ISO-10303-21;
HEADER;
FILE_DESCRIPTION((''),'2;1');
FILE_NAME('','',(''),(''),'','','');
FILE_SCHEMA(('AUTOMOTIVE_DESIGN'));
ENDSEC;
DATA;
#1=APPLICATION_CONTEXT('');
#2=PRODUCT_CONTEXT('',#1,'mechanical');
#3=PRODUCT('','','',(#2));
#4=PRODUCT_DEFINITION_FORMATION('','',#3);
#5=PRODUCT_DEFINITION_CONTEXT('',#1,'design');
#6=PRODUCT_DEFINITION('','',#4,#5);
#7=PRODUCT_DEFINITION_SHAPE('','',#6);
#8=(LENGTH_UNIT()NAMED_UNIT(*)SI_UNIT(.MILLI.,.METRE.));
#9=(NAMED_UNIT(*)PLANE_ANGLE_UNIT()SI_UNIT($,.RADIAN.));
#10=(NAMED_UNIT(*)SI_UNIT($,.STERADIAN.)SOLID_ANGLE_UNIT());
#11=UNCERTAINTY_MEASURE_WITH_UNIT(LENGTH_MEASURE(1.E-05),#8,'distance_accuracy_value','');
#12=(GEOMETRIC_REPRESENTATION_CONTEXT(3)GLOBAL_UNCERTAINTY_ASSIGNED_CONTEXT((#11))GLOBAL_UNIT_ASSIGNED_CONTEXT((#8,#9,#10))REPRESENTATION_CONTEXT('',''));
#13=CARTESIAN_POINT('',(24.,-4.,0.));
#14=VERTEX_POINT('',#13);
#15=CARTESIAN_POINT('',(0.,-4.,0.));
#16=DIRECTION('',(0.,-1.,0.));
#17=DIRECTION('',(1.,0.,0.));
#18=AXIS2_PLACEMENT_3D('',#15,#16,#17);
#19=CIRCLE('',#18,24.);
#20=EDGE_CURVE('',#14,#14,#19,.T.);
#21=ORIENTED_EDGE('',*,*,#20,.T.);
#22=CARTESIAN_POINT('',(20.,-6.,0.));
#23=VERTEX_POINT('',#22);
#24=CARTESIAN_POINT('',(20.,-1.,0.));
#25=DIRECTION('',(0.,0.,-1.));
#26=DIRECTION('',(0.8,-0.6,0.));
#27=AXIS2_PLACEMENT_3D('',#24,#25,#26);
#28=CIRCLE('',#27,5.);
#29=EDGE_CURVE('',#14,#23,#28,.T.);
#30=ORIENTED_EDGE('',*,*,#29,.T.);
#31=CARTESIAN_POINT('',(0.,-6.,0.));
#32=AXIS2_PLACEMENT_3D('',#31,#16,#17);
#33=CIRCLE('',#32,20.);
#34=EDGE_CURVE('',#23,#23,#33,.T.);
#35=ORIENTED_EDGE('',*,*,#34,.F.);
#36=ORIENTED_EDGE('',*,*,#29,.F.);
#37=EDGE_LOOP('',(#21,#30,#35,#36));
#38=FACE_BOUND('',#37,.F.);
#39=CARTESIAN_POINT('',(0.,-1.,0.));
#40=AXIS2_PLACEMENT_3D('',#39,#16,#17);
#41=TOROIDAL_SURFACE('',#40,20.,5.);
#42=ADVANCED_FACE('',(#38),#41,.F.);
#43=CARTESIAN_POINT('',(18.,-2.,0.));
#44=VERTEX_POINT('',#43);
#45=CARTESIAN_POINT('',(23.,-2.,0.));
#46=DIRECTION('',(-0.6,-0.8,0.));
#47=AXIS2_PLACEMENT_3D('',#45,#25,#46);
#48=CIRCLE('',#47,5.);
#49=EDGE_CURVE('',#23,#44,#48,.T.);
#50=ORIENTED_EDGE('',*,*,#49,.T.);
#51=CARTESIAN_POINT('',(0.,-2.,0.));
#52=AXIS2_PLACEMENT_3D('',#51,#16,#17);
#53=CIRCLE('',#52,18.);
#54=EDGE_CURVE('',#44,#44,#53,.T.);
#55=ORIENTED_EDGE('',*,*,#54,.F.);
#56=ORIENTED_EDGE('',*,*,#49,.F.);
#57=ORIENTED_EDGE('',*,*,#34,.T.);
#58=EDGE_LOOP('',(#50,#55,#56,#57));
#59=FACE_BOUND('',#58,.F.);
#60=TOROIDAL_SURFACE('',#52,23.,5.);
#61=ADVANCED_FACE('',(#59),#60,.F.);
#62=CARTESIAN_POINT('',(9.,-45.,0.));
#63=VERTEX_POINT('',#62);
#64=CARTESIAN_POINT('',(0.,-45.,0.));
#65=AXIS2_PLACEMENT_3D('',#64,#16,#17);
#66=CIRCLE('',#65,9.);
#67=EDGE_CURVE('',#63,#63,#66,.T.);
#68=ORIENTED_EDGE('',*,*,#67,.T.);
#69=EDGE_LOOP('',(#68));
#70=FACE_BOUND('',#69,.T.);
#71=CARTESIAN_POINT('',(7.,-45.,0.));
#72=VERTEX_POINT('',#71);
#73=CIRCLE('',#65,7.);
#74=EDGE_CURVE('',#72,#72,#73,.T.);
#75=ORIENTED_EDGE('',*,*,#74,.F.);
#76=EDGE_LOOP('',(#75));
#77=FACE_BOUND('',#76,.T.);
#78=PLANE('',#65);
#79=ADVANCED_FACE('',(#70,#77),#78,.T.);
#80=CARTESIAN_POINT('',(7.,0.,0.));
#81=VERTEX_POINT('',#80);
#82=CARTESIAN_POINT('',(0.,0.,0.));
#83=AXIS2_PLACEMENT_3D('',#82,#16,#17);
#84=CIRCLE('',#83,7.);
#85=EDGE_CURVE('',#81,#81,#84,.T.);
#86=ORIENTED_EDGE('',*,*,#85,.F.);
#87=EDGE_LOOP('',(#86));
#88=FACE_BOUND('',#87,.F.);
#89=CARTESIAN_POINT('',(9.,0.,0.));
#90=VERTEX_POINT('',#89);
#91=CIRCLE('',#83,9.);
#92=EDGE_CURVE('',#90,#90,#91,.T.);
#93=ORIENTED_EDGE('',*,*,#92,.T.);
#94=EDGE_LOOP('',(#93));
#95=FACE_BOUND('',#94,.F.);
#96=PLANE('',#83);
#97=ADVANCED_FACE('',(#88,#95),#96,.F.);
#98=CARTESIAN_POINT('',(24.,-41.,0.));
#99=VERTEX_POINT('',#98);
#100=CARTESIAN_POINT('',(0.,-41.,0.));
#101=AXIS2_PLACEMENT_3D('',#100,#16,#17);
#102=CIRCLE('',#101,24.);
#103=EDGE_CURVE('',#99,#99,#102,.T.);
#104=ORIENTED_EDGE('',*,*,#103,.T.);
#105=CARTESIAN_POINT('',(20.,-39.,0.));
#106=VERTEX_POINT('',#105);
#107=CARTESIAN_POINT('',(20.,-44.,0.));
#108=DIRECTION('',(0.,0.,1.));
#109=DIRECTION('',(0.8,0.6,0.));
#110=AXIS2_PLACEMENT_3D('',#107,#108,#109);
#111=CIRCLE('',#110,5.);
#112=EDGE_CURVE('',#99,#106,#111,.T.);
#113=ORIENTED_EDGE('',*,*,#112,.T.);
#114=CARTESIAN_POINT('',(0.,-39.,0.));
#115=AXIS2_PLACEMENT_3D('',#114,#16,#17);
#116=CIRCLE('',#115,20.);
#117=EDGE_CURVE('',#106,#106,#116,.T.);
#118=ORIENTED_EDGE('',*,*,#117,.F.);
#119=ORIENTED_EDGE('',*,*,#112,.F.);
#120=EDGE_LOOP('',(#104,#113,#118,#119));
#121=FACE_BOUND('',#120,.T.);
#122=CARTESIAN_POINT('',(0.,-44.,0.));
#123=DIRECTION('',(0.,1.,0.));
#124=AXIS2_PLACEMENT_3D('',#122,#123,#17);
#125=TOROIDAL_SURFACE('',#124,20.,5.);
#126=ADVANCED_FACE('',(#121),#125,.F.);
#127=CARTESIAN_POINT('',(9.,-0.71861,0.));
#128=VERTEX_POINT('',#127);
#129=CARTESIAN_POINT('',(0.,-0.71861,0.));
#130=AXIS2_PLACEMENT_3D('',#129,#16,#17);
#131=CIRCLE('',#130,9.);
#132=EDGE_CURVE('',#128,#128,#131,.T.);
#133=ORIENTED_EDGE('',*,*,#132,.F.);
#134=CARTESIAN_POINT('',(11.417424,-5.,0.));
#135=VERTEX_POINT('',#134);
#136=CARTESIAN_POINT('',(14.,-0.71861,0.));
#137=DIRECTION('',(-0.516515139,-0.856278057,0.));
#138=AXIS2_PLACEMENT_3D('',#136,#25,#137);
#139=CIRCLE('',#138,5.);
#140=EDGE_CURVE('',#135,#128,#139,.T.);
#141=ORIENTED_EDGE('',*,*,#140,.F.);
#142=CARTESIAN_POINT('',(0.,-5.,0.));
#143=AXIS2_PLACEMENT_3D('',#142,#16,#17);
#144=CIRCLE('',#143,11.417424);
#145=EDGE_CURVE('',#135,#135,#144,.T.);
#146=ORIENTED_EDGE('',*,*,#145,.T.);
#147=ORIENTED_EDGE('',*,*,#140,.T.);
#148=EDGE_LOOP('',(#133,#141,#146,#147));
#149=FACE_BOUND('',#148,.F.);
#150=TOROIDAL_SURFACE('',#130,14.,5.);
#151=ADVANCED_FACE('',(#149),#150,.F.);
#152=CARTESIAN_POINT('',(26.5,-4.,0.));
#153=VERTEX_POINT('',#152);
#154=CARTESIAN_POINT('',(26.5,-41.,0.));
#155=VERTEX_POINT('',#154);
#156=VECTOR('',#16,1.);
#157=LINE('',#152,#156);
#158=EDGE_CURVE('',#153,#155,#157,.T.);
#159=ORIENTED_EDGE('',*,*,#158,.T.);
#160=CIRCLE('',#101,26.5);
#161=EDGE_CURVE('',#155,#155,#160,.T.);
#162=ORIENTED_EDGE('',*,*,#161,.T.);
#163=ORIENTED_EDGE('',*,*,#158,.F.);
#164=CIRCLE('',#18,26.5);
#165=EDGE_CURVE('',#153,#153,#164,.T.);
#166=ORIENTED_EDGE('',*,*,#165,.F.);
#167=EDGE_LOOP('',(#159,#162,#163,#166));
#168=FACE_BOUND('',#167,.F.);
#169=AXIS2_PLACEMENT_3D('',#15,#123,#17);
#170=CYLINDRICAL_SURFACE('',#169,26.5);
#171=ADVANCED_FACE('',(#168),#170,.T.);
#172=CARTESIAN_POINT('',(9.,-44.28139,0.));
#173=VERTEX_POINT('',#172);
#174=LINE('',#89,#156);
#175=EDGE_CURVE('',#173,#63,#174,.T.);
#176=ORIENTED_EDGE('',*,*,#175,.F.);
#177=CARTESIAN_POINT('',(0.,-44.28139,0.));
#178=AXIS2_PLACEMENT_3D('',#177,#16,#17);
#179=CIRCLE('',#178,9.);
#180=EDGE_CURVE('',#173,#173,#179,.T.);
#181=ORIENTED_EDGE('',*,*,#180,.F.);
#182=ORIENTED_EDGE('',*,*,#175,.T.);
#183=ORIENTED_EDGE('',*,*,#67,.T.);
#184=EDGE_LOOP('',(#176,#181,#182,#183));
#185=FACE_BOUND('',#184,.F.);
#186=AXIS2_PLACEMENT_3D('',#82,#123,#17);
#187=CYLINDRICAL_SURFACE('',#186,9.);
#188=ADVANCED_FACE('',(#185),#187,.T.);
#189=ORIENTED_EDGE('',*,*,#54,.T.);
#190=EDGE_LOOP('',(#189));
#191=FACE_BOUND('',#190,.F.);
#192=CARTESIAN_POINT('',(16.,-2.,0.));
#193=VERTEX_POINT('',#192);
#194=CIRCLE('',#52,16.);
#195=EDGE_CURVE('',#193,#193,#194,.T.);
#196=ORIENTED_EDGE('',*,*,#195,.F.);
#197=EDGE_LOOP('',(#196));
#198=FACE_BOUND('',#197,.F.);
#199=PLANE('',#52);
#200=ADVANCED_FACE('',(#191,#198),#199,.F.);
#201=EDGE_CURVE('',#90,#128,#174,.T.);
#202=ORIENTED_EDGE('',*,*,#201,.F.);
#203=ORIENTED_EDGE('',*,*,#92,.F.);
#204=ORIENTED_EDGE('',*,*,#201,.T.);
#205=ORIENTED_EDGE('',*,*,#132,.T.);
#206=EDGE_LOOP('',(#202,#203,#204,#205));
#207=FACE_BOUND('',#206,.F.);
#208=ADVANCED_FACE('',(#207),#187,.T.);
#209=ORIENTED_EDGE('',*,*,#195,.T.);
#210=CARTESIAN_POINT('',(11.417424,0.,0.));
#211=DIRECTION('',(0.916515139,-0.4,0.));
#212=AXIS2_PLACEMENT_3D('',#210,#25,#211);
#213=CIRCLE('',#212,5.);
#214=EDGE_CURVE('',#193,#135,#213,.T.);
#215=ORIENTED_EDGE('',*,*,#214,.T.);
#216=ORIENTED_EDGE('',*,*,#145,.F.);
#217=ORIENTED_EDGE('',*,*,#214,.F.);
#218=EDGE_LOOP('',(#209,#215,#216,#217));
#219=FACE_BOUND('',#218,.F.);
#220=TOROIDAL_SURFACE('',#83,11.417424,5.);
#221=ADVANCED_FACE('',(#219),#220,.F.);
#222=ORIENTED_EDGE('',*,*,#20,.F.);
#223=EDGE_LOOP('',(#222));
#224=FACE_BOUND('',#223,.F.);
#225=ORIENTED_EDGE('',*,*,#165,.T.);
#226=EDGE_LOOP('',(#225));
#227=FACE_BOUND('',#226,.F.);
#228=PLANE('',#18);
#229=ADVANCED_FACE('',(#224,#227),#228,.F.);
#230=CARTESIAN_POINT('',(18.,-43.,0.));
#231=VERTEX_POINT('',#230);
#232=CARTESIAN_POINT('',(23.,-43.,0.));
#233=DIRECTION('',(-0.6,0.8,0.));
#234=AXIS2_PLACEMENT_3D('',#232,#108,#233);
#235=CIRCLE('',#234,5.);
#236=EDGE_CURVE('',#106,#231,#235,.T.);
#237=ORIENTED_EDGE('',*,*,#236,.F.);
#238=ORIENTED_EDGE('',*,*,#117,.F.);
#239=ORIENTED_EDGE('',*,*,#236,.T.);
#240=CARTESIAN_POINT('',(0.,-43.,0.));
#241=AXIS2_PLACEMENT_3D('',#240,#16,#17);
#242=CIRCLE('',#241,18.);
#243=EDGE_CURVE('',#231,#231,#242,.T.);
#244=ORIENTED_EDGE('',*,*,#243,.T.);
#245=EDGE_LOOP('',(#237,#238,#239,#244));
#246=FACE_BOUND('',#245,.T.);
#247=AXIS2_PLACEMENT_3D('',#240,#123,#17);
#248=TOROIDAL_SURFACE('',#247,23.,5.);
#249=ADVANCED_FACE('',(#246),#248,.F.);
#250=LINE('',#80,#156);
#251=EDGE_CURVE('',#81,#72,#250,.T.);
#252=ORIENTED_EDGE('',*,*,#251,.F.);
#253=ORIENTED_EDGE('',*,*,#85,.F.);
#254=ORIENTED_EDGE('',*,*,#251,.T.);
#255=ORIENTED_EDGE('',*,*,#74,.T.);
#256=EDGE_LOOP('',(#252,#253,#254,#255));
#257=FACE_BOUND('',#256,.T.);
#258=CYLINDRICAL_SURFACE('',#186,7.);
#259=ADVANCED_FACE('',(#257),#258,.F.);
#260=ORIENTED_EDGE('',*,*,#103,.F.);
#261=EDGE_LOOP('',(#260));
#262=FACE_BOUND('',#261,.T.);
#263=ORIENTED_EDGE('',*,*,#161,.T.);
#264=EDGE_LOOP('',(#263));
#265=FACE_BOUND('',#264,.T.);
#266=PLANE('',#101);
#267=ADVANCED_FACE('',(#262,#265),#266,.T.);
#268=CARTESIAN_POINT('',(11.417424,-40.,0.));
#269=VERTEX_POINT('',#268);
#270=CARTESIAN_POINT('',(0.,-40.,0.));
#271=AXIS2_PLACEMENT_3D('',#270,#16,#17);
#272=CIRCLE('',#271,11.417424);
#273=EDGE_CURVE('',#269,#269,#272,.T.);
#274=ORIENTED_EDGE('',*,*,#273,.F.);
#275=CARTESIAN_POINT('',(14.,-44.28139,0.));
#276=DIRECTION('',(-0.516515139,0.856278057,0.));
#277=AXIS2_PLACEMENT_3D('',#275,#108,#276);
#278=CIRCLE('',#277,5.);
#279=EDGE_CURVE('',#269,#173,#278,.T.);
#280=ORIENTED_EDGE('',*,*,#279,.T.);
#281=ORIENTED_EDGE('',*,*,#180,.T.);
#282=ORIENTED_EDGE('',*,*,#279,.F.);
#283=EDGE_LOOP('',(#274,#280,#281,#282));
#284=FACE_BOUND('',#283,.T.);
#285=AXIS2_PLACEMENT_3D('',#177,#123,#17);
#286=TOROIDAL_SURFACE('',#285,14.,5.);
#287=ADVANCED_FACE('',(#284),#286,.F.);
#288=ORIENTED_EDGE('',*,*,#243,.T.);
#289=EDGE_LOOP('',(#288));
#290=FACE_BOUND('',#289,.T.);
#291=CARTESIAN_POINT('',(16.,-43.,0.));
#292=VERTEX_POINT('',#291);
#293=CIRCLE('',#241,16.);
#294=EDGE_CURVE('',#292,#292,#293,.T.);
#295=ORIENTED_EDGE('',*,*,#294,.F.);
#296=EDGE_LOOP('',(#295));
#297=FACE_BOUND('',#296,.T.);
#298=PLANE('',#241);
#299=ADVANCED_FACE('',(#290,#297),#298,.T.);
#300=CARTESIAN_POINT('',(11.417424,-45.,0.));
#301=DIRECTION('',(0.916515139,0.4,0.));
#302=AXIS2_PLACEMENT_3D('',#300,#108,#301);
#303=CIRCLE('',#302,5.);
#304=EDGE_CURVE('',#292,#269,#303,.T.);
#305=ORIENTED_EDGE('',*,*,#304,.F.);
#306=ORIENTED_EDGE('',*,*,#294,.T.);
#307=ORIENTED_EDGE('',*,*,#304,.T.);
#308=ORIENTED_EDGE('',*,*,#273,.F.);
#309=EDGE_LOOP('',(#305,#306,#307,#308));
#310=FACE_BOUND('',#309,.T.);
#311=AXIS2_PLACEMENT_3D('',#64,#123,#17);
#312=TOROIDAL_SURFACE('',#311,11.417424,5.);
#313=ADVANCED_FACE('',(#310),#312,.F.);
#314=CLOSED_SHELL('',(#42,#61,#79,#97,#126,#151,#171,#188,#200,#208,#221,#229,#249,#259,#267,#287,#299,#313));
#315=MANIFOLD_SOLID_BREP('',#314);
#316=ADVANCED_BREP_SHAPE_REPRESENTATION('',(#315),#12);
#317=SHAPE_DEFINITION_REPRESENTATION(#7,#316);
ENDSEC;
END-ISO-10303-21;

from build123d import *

# Parameters (mm, degrees)
F0_R      = 9
F0_R_2    = 7
F1_DEPTH  = 45
F3_R      = 16
F3_R_2    = 9
F4_DEPTH  = 35
F6_R      = 18
F6_R_2    = 16
F7_DEPTH  = 41
F9_R      = 26.5
F9_R_2    = 24
F10_DEPTH = 37
F12_R     = 24
F12_R_2   = 18
F13_DEPTH = 33


# Not quite as in the source:
# - a fillet or chamfer that OpenCascade refuses, or shapes differently, is made with other operations: its cross-section is extruded or revolved along the edge and cut away or added


with BuildPart() as f1:
    # F0 (on Front) → F1 (new body)
    with BuildSketch(Plane.XZ):
        Circle(F0_R)
        Circle(F0_R_2, mode=Mode.SUBTRACT)
    extrude(amount=F1_DEPTH)

    # F3 (on offset) → F4 (join)
    with BuildSketch(Plane.XZ.offset(5)):
        Circle(F3_R)
        Circle(F3_R_2, mode=Mode.SUBTRACT)
    extrude(amount=F4_DEPTH)

    # F6 (on offset) → F7 (join)
    with BuildSketch(Plane.XZ.offset(2)):
        Circle(F6_R)
        Circle(F6_R_2, mode=Mode.SUBTRACT)
    extrude(amount=F7_DEPTH)



with BuildPart() as f10:
    # F9 (on offset) → F10 (new body)
    with BuildSketch(Plane.XZ.offset(4)):
        Circle(F9_R)
        Circle(F9_R_2, mode=Mode.SUBTRACT)
    extrude(amount=F10_DEPTH)


with BuildPart() as f1_1:
    add(f1.part)

    add(f10.part)  # F13 merges F10
    # F12 (on offset) → F13 (join)
    with BuildSketch(Plane.XZ.offset(6)):
        Circle(F12_R)
        Circle(F12_R_2, mode=Mode.SUBTRACT)
    extrude(amount=F13_DEPTH)

    # F14: fillet of radius 5 on 2 edges, made by hand

    # F14_s1 → F14_t2 (revolve)
    with BuildSketch(Plane.XY):
        with BuildLine():
            ThreePointArc((16, -43), (14.1560370926, -40.8166998673), (11.417424305, -40))
            Line((11.417424305, -40), (16, -40))
            Line((16, -40), (16, -43))
        make_face()
    revolve(axis=Axis((0, -40, 0), (0, -1, 0)))

    # F14_s3 → F14_t4 (revolve)
    with BuildSketch(Plane.XY):
        with BuildLine():
            ThreePointArc((24, -41), (22.2360679775, -39.527864045), (20, -39))
            Line((20, -39), (24, -39))
            Line((24, -39), (24, -41))
        make_face()
    revolve(axis=Axis((0, -39, 0), (0, -1, 0)))

    # F15: fillet of radius 5 on 2 edges, made by hand

    # F15_s1 → F15_t2 (revolve)
    with BuildSketch(Plane.XY):
        with BuildLine():
            ThreePointArc((11.417424305, -40), (9.6461006859, -41.8230248202), (9, -44.2813902858))
            Line((9, -44.2813902858), (9, -40))
            Line((9, -40), (11.417424305, -40))
        make_face()
    revolve(axis=Axis((0, -40, 0), (0, -1, 0)))

    # F15_s3 → F15_t4 (revolve)
    with BuildSketch(Plane.XY):
        with BuildLine():
            ThreePointArc((20, -39), (18.527864045, -40.7639320225), (18, -43))
            Line((18, -43), (18, -39))
            Line((18, -39), (20, -39))
        make_face()
    revolve(axis=Axis((0, -39, 0), (0, -1, 0)))

    # F16: fillet of radius 5 on 2 edges, made by hand

    # F16_s1 → F16_t2 (revolve)
    with BuildSketch(Plane.XY):
        with BuildLine():
            ThreePointArc((16, -2), (14.1560370926, -4.1833001327), (11.417424305, -5))
            Line((11.417424305, -5), (16, -5))
            Line((16, -5), (16, -2))
        make_face()
    revolve(axis=Axis((0, -5, 0), (0, -1, 0)))

    # F16_s3 → F16_t4 (revolve)
    with BuildSketch(Plane.XY):
        with BuildLine():
            ThreePointArc((24, -4), (22.2360679775, -5.472135955), (20, -6))
            Line((20, -6), (24, -6))
            Line((24, -6), (24, -4))
        make_face()
    revolve(axis=Axis((0, -6, 0), (0, -1, 0)))

    # F17: fillet of radius 5 on 2 edges, made by hand

    # F17_s1 → F17_t2 (revolve)
    with BuildSketch(Plane.XY):
        with BuildLine():
            ThreePointArc((11.417424305, -5), (9.6461006859, -3.1769751798), (9, -0.7186097142))
            Line((9, -0.7186097142), (9, -5))
            Line((9, -5), (11.417424305, -5))
        make_face()
    revolve(axis=Axis((0, -5, 0), (0, -1, 0)))

    # F17_s3 → F17_t4 (revolve)
    with BuildSketch(Plane.XY):
        with BuildLine():
            ThreePointArc((20, -6), (18.527864045, -4.2360679775), (18, -2))
            Line((18, -2), (18, -6))
            Line((18, -6), (20, -6))
        make_face()
    revolve(axis=Axis((0, -6, 0), (0, -1, 0)))


solid = f1_1.part
